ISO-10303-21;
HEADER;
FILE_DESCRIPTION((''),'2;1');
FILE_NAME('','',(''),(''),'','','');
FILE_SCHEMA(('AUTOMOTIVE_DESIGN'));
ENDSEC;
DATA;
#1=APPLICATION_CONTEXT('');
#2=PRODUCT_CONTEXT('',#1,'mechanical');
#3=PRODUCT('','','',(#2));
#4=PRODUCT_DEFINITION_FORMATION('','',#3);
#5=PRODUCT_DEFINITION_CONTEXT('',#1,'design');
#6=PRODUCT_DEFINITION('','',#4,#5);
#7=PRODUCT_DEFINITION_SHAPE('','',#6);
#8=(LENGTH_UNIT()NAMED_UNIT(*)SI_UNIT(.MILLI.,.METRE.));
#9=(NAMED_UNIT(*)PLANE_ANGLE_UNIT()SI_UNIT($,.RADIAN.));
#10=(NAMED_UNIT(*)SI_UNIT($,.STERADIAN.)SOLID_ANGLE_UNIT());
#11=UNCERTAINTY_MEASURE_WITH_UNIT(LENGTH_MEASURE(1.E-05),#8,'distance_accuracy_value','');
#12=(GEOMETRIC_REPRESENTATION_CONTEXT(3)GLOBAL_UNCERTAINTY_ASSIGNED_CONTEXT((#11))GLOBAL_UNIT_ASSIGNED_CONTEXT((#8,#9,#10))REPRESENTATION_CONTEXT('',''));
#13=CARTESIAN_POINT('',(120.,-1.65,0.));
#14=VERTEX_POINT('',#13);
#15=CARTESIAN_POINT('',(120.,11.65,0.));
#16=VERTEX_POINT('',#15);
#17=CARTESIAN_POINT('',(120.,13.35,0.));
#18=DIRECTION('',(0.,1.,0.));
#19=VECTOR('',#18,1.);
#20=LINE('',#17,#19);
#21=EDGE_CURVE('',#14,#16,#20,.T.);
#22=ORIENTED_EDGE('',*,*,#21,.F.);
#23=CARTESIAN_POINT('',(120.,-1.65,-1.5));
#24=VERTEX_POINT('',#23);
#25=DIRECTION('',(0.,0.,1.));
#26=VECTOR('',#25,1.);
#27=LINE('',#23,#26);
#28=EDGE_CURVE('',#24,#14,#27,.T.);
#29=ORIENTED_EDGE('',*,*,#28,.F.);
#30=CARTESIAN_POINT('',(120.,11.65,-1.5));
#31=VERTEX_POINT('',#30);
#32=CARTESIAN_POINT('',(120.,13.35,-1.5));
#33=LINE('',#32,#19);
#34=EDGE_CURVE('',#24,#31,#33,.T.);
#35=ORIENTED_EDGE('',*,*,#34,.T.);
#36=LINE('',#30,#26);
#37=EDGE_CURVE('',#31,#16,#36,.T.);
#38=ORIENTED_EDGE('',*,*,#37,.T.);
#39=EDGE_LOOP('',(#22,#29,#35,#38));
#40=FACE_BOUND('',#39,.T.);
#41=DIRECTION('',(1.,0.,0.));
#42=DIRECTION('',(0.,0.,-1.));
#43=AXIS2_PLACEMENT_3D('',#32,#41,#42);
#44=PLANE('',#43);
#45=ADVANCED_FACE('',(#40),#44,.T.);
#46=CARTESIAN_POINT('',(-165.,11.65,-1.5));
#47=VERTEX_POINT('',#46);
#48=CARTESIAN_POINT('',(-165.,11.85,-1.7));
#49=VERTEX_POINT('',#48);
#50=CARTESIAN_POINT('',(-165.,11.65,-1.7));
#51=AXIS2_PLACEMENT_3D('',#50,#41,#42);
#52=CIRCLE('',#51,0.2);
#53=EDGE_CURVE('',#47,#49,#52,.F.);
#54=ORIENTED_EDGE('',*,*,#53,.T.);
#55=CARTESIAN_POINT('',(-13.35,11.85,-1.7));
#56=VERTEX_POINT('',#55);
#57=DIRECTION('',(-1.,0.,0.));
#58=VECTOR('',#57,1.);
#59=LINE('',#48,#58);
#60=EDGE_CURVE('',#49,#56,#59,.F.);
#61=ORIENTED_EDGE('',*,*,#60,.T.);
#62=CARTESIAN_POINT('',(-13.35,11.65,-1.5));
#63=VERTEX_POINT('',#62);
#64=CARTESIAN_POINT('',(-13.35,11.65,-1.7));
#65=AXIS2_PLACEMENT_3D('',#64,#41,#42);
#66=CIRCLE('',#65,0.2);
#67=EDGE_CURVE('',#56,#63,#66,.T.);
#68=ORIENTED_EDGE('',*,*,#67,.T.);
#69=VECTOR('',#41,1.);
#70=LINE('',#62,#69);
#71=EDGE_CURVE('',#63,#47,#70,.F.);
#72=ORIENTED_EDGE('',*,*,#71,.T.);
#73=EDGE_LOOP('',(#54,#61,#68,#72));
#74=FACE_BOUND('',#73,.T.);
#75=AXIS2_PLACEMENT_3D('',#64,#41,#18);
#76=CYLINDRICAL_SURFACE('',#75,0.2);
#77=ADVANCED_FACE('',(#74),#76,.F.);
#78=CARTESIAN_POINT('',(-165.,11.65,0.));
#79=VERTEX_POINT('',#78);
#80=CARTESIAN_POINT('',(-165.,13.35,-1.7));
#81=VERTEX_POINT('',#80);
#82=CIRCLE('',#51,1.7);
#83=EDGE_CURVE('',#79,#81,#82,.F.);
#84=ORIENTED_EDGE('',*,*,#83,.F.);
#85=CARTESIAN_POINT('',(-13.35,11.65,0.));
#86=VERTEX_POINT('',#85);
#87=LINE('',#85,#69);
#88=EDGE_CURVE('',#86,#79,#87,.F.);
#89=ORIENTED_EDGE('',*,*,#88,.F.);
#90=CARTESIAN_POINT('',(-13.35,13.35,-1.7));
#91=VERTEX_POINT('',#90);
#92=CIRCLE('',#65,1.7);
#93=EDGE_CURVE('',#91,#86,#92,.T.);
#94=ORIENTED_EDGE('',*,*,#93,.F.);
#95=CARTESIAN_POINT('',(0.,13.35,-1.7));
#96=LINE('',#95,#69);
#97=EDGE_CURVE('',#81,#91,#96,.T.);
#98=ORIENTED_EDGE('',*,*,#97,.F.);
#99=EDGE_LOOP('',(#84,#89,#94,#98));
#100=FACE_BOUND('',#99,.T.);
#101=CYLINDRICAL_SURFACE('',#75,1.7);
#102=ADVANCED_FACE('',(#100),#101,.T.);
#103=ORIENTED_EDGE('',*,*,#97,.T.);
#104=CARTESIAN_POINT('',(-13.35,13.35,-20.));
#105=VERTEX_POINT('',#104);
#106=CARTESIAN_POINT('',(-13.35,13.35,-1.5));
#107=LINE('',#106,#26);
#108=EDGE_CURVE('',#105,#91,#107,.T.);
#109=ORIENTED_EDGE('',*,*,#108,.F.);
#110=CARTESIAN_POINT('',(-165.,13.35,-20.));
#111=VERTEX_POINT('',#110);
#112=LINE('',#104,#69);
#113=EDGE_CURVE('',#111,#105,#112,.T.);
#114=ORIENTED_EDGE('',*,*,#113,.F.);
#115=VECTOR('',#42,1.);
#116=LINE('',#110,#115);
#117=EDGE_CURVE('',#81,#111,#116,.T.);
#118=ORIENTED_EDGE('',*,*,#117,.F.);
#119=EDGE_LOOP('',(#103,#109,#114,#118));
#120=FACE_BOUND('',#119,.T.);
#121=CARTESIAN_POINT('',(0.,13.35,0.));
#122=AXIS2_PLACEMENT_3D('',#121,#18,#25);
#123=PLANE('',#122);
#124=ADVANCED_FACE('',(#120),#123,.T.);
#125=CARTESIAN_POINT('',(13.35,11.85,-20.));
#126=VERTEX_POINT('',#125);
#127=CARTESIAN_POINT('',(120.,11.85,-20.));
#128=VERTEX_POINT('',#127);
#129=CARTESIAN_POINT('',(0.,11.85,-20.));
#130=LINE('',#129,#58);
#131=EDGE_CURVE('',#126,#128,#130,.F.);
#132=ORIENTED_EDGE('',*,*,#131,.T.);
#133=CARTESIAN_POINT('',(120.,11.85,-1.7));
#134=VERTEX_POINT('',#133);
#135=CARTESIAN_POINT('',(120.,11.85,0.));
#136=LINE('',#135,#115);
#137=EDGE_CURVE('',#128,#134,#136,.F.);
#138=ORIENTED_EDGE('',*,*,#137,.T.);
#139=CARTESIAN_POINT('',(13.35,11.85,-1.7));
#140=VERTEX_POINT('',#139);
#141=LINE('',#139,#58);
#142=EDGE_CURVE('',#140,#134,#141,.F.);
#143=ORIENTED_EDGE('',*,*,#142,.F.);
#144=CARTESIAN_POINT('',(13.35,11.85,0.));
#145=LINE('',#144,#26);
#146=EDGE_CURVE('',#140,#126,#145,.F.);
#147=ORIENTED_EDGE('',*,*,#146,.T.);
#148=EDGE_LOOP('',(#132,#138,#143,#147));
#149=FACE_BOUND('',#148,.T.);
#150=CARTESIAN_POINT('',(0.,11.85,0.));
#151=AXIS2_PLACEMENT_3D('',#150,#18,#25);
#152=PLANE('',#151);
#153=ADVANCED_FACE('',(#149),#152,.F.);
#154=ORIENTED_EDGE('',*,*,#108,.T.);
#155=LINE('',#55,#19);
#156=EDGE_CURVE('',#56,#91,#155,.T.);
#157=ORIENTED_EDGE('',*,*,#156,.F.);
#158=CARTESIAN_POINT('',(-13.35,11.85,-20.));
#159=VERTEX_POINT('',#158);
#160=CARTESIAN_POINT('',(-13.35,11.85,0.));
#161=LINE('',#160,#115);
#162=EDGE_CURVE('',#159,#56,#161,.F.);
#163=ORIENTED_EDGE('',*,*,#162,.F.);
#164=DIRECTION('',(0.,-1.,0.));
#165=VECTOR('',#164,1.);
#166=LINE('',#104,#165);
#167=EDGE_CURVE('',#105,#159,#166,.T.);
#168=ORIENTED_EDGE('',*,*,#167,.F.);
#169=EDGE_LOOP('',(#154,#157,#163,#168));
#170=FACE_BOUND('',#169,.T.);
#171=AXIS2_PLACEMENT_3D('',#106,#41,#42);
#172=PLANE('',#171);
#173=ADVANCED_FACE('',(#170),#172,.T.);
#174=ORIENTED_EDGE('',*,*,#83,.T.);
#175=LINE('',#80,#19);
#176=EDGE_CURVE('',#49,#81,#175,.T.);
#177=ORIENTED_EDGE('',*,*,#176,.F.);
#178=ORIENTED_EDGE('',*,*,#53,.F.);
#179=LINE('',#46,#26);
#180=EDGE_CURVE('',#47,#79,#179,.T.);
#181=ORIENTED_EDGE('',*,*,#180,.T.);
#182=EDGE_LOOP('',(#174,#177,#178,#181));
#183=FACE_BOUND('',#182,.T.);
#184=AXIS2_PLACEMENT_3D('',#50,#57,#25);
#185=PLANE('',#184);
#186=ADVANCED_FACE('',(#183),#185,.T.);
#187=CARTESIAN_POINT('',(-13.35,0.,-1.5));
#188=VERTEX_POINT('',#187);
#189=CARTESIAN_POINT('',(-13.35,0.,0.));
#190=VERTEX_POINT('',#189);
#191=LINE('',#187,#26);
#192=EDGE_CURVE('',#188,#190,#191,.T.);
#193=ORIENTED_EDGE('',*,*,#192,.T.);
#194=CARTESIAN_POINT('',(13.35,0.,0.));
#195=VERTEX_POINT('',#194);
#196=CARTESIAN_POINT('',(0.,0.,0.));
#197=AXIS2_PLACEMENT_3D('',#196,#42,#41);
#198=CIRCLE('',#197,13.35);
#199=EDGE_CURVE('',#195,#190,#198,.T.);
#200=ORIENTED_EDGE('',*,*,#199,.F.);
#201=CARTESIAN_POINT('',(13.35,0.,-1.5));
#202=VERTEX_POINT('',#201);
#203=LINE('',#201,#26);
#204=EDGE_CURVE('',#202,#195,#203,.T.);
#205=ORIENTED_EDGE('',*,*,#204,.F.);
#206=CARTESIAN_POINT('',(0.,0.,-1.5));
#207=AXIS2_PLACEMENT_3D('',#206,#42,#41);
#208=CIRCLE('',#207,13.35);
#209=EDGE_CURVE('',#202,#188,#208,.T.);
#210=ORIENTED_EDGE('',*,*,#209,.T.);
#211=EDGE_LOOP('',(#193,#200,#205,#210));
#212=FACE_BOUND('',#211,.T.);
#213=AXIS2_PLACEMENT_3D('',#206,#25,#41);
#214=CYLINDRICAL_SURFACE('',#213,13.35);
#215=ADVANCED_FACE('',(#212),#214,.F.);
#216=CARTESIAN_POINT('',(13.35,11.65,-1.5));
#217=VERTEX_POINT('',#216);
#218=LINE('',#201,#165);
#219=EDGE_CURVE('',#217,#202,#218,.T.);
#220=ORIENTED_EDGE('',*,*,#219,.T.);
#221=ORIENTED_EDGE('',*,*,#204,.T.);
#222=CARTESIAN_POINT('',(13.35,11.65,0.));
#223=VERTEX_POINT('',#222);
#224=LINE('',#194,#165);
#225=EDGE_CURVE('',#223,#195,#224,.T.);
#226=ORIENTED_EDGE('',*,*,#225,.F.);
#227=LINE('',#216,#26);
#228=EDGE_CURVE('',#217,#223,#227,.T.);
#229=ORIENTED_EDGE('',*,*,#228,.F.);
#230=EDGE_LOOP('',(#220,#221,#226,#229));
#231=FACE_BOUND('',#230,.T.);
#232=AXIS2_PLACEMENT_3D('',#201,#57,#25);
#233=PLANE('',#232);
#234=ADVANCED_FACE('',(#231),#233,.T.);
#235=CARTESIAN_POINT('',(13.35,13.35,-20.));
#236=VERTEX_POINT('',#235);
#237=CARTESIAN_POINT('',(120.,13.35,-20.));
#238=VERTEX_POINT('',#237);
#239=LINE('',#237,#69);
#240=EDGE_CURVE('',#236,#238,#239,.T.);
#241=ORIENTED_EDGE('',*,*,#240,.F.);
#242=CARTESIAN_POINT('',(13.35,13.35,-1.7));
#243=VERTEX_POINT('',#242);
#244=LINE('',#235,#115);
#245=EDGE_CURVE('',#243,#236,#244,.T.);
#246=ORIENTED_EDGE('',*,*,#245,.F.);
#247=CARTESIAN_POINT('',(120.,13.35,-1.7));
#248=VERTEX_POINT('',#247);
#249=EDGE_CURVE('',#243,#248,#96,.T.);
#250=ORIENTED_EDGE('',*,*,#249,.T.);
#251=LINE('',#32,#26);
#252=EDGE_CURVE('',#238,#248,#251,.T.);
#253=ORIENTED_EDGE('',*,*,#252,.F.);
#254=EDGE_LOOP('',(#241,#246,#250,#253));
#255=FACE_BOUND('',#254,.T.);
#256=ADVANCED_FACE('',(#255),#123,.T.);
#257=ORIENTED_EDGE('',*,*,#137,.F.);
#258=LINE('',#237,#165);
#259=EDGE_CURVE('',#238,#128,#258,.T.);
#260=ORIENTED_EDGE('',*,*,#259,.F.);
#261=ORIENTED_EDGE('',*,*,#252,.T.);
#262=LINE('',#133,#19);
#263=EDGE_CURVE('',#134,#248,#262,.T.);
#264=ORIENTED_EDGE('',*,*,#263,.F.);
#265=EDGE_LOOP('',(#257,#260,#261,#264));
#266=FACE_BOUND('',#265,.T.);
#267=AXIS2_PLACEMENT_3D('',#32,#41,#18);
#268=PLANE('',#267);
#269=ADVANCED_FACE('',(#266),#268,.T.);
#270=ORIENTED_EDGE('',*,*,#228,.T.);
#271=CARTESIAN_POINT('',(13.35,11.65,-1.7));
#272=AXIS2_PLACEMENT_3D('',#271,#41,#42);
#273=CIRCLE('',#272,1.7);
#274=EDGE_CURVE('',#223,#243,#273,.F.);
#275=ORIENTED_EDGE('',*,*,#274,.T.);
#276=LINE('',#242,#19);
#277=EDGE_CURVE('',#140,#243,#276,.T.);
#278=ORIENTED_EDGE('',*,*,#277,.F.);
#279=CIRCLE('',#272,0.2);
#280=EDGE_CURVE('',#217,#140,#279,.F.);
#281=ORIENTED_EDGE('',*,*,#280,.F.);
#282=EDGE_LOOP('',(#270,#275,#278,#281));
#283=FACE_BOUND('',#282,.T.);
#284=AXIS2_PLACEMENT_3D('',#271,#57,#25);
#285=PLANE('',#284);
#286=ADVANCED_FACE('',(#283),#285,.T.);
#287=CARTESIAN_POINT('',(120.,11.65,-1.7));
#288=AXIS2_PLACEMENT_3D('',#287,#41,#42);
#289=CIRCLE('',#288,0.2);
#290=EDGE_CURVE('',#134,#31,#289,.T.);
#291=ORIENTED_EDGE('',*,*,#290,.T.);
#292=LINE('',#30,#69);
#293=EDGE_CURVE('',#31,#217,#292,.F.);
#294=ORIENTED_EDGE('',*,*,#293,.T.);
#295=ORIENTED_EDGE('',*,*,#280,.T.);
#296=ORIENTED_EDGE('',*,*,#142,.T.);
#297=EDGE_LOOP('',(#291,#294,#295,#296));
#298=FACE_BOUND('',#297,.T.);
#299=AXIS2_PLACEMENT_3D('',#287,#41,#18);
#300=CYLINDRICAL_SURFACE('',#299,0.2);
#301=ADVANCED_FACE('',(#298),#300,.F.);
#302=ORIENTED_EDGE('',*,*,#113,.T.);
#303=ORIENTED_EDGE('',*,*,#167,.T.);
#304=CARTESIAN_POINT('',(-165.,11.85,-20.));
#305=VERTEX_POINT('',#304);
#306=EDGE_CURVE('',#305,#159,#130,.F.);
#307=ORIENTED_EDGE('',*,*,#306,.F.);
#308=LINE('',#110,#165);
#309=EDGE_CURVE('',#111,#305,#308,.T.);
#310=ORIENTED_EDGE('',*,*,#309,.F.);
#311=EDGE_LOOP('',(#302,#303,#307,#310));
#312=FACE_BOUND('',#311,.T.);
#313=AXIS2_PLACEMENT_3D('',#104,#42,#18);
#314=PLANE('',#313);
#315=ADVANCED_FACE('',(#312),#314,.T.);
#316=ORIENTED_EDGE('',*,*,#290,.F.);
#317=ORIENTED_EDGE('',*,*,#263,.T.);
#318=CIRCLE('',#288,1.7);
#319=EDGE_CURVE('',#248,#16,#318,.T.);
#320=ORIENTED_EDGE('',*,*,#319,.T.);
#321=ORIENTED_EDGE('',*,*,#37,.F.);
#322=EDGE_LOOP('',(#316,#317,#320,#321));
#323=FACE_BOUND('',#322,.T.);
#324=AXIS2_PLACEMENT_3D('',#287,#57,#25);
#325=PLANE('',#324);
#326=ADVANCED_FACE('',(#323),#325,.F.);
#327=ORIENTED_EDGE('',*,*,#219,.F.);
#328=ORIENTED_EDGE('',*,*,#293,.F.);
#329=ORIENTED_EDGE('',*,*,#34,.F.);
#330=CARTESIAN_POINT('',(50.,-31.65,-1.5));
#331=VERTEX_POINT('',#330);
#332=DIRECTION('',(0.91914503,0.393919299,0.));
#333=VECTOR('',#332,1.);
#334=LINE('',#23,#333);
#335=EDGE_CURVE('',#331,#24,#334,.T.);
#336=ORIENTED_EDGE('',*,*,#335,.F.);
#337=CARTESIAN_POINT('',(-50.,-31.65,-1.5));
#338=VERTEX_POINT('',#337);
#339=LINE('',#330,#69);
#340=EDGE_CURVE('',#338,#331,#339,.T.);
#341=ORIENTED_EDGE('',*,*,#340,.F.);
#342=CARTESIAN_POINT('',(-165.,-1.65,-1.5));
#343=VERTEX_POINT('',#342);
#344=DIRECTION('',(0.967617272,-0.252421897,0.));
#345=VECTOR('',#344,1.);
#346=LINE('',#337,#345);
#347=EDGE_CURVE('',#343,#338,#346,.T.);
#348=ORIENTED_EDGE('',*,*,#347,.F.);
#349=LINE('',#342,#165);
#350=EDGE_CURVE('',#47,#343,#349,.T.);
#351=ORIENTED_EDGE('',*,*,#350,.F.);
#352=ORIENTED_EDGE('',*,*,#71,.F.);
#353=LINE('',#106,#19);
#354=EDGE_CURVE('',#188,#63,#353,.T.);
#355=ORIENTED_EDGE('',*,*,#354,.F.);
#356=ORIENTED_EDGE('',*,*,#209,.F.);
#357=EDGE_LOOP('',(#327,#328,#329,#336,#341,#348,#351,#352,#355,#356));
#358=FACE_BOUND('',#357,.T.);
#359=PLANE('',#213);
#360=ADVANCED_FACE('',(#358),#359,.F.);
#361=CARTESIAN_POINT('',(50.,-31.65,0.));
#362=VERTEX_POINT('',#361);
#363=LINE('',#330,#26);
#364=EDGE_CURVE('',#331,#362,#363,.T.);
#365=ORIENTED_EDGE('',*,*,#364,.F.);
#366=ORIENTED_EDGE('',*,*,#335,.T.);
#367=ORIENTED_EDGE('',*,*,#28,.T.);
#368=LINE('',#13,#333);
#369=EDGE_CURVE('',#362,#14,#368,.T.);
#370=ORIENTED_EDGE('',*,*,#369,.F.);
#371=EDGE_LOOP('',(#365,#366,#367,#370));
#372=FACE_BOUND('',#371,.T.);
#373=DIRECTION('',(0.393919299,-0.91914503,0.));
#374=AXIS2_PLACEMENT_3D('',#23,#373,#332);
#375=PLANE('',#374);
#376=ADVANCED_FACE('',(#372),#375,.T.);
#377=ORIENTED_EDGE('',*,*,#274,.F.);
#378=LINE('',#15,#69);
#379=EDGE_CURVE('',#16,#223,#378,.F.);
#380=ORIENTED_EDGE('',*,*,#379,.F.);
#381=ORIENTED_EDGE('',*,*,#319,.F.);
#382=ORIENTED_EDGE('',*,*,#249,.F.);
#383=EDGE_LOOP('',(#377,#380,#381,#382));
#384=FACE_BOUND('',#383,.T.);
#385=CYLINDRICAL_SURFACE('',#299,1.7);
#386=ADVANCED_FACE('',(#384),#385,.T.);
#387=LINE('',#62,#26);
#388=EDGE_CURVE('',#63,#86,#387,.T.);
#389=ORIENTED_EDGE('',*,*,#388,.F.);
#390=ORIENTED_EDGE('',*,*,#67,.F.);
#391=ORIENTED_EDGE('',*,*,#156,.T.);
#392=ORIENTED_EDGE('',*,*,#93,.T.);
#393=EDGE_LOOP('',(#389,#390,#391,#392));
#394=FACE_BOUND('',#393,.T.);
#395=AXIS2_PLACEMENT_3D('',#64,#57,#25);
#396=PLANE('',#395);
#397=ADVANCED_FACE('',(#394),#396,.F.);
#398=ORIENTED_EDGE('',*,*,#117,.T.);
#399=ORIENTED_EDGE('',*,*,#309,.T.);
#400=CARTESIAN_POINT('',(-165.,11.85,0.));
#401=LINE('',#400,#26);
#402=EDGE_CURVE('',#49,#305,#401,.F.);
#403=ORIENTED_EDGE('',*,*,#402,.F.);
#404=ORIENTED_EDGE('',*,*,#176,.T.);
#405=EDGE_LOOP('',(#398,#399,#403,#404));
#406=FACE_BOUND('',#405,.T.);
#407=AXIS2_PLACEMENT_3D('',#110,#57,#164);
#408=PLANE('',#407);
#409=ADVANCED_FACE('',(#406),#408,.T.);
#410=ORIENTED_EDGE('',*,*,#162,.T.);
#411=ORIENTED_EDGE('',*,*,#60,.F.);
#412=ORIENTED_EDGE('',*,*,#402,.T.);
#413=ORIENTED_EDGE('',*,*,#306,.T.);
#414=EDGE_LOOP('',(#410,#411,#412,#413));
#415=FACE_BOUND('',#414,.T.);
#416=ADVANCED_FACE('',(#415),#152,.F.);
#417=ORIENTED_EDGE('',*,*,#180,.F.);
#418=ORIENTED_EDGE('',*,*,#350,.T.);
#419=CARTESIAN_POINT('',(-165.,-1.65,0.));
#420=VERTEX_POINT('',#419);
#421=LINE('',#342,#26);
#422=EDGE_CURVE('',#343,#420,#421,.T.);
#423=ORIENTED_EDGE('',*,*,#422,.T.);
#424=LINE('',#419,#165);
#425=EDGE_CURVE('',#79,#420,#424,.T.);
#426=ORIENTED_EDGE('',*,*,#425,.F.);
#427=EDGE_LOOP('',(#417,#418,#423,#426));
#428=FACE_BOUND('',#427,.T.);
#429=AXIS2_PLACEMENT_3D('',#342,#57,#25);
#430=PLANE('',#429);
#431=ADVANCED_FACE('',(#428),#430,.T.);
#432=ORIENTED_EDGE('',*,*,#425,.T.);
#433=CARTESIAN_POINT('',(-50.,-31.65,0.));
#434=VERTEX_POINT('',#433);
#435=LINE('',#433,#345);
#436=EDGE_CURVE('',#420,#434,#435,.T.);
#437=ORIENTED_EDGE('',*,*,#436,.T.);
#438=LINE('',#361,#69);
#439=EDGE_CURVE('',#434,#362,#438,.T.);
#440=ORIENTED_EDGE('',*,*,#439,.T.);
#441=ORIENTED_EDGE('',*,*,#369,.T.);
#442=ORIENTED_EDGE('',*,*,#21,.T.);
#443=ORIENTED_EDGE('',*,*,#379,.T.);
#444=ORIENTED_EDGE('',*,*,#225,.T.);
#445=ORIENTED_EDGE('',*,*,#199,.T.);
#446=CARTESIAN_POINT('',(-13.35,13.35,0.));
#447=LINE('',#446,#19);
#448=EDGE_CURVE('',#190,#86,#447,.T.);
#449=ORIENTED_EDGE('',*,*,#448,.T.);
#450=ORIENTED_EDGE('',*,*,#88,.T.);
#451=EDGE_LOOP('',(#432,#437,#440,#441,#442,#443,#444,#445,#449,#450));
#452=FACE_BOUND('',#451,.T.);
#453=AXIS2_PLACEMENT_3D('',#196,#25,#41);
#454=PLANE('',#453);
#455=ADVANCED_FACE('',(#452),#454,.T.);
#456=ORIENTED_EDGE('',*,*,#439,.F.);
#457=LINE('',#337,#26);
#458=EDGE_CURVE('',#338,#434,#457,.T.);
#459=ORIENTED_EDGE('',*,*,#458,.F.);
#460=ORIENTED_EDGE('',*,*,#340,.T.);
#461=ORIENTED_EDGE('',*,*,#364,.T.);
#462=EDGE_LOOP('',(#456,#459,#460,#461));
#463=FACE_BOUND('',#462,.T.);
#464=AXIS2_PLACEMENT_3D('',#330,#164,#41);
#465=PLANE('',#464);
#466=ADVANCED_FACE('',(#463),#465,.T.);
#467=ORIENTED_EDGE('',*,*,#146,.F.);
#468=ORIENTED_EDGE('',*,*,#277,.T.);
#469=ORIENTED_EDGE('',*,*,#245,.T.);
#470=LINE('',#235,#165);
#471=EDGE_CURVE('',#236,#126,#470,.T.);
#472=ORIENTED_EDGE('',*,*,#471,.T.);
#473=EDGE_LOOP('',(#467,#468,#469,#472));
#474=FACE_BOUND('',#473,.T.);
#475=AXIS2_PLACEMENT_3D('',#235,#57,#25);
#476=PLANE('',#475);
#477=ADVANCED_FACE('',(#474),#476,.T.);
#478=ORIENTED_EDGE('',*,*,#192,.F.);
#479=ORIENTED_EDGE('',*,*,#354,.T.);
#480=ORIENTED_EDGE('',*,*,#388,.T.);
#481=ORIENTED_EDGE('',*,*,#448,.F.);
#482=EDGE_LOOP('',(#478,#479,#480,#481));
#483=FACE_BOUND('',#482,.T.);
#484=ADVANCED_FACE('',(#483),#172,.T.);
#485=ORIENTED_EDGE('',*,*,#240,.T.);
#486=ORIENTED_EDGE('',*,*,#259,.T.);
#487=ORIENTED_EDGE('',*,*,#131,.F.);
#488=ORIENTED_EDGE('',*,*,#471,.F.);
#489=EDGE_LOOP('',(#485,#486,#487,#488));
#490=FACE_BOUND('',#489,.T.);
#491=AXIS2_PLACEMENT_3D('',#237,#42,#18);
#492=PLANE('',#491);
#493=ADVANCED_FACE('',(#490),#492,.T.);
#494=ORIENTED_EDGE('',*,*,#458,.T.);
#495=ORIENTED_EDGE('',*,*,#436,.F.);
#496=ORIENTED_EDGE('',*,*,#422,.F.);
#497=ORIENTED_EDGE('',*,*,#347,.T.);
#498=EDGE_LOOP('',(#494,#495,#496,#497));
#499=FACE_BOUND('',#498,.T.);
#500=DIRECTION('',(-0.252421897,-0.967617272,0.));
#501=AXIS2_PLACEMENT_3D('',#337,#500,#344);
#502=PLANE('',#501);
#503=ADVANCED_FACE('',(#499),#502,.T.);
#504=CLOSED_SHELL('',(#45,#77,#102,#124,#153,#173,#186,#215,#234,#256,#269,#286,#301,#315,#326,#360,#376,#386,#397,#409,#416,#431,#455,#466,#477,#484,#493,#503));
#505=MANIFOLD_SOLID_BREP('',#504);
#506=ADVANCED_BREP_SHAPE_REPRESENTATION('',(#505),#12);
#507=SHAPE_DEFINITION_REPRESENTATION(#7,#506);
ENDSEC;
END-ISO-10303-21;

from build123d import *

# Parameters (mm, degrees)
BASE_FLANGE1_DEPTH             = 1.5
EDGE_FLANGE1_STRIP_W           = 6.4
EDGE_FLANGE1_STRIP_H           = 1.5
EDGE_FLANGE1_STRIP_CUT_DEPTH   = 151.65
EDGE_FLANGE1_STRIP_2_W         = 6.4
EDGE_FLANGE1_STRIP_2_H         = 1.5
EDGE_FLANGE1_STRIP_CUT_2_DEPTH = 106.65
EDGE_FLANGE1_DEPTH             = 151.65
EDGE_FLANGE1_BEND_DEPTH        = 106.65


# Sheet-metal steps are written as plain solids
with BuildPart() as part:
    # Sketch1 → Base-Flange1 (new body)
    with BuildSketch(Plane.XY):
        with BuildLine():
            Line((13.35, 0), (13.35, 13.35))
            Line((13.35, 13.35), (120, 13.35))
            Line((120, 13.35), (120, -1.65))
            Line((120, -1.65), (50, -31.65))
            Line((50, -31.65), (-50, -31.65))
            Line((-50, -31.65), (-165, -1.65))
            Line((-165, -1.65), (-165, 13.35))
            Line((-165, 13.35), (-13.35, 13.35))
            Line((-13.35, 13.35), (-13.35, 0))
            ThreePointArc((-13.35, 0), (0, -13.35), (13.35, 0))
        make_face()
    extrude(amount=-BASE_FLANGE1_DEPTH)

    # Edge-Flange1 strip (across the edge) → Edge-Flange1 strip cut (cut)
    with BuildSketch(Plane(origin=(-165, 13.35, -1.5), x_dir=(0, -1, 0), z_dir=(1, 0, 0))):
        with Locations((-1.5, -0.75)):
            Rectangle(EDGE_FLANGE1_STRIP_W, EDGE_FLANGE1_STRIP_H)
    extrude(amount=EDGE_FLANGE1_STRIP_CUT_DEPTH, mode=Mode.SUBTRACT)

    # Edge-Flange1 strip 2 (across the edge) → Edge-Flange1 strip cut 2 (cut)
    with BuildSketch(Plane(origin=(13.35, 13.35, -1.5), x_dir=(0, -1, 0), z_dir=(1, 0, 0))):
        with Locations((-1.5, -0.75)):
            Rectangle(EDGE_FLANGE1_STRIP_2_W, EDGE_FLANGE1_STRIP_2_H)
    extrude(amount=EDGE_FLANGE1_STRIP_CUT_2_DEPTH, mode=Mode.SUBTRACT)

    # Edge-Flange1 section (across the edge) → Edge-Flange1 (add)
    with BuildSketch(Plane(origin=(-165, 13.35, -1.5), x_dir=(0, -1, 0), z_dir=(1, 0, 0))):
        with BuildLine():
            Line((0, 0.2), (0, 18.5))
            Line((0, 18.5), (1.5, 18.5))
            Line((1.5, 18.5), (1.5, 0.2))
            ThreePointArc((1.5, 0.2), (1.558578644, 0.058578644), (1.7, 0))
            Line((1.7, 0), (1.7, -1.5))
            ThreePointArc((1.7, -1.5), (0.497918472, -1.002081528), (0, 0.2))
        make_face()
    extrude(amount=EDGE_FLANGE1_DEPTH)

    # Edge-Flange1 section 2 (across the edge) → Edge-Flange1 bend (add)
    with BuildSketch(Plane(origin=(13.35, 13.35, -1.5), x_dir=(0, -1, 0), z_dir=(1, 0, 0))):
        with BuildLine():
            Line((0, 0.2), (0, 18.5))
            Line((0, 18.5), (1.5, 18.5))
            Line((1.5, 18.5), (1.5, 0.2))
            ThreePointArc((1.5, 0.2), (1.558578644, 0.058578644), (1.7, 0))
            Line((1.7, 0), (1.7, -1.5))
            ThreePointArc((1.7, -1.5), (0.497918472, -1.002081528), (0, 0.2))
        make_face()
    extrude(amount=EDGE_FLANGE1_BEND_DEPTH)


solid = part.part
